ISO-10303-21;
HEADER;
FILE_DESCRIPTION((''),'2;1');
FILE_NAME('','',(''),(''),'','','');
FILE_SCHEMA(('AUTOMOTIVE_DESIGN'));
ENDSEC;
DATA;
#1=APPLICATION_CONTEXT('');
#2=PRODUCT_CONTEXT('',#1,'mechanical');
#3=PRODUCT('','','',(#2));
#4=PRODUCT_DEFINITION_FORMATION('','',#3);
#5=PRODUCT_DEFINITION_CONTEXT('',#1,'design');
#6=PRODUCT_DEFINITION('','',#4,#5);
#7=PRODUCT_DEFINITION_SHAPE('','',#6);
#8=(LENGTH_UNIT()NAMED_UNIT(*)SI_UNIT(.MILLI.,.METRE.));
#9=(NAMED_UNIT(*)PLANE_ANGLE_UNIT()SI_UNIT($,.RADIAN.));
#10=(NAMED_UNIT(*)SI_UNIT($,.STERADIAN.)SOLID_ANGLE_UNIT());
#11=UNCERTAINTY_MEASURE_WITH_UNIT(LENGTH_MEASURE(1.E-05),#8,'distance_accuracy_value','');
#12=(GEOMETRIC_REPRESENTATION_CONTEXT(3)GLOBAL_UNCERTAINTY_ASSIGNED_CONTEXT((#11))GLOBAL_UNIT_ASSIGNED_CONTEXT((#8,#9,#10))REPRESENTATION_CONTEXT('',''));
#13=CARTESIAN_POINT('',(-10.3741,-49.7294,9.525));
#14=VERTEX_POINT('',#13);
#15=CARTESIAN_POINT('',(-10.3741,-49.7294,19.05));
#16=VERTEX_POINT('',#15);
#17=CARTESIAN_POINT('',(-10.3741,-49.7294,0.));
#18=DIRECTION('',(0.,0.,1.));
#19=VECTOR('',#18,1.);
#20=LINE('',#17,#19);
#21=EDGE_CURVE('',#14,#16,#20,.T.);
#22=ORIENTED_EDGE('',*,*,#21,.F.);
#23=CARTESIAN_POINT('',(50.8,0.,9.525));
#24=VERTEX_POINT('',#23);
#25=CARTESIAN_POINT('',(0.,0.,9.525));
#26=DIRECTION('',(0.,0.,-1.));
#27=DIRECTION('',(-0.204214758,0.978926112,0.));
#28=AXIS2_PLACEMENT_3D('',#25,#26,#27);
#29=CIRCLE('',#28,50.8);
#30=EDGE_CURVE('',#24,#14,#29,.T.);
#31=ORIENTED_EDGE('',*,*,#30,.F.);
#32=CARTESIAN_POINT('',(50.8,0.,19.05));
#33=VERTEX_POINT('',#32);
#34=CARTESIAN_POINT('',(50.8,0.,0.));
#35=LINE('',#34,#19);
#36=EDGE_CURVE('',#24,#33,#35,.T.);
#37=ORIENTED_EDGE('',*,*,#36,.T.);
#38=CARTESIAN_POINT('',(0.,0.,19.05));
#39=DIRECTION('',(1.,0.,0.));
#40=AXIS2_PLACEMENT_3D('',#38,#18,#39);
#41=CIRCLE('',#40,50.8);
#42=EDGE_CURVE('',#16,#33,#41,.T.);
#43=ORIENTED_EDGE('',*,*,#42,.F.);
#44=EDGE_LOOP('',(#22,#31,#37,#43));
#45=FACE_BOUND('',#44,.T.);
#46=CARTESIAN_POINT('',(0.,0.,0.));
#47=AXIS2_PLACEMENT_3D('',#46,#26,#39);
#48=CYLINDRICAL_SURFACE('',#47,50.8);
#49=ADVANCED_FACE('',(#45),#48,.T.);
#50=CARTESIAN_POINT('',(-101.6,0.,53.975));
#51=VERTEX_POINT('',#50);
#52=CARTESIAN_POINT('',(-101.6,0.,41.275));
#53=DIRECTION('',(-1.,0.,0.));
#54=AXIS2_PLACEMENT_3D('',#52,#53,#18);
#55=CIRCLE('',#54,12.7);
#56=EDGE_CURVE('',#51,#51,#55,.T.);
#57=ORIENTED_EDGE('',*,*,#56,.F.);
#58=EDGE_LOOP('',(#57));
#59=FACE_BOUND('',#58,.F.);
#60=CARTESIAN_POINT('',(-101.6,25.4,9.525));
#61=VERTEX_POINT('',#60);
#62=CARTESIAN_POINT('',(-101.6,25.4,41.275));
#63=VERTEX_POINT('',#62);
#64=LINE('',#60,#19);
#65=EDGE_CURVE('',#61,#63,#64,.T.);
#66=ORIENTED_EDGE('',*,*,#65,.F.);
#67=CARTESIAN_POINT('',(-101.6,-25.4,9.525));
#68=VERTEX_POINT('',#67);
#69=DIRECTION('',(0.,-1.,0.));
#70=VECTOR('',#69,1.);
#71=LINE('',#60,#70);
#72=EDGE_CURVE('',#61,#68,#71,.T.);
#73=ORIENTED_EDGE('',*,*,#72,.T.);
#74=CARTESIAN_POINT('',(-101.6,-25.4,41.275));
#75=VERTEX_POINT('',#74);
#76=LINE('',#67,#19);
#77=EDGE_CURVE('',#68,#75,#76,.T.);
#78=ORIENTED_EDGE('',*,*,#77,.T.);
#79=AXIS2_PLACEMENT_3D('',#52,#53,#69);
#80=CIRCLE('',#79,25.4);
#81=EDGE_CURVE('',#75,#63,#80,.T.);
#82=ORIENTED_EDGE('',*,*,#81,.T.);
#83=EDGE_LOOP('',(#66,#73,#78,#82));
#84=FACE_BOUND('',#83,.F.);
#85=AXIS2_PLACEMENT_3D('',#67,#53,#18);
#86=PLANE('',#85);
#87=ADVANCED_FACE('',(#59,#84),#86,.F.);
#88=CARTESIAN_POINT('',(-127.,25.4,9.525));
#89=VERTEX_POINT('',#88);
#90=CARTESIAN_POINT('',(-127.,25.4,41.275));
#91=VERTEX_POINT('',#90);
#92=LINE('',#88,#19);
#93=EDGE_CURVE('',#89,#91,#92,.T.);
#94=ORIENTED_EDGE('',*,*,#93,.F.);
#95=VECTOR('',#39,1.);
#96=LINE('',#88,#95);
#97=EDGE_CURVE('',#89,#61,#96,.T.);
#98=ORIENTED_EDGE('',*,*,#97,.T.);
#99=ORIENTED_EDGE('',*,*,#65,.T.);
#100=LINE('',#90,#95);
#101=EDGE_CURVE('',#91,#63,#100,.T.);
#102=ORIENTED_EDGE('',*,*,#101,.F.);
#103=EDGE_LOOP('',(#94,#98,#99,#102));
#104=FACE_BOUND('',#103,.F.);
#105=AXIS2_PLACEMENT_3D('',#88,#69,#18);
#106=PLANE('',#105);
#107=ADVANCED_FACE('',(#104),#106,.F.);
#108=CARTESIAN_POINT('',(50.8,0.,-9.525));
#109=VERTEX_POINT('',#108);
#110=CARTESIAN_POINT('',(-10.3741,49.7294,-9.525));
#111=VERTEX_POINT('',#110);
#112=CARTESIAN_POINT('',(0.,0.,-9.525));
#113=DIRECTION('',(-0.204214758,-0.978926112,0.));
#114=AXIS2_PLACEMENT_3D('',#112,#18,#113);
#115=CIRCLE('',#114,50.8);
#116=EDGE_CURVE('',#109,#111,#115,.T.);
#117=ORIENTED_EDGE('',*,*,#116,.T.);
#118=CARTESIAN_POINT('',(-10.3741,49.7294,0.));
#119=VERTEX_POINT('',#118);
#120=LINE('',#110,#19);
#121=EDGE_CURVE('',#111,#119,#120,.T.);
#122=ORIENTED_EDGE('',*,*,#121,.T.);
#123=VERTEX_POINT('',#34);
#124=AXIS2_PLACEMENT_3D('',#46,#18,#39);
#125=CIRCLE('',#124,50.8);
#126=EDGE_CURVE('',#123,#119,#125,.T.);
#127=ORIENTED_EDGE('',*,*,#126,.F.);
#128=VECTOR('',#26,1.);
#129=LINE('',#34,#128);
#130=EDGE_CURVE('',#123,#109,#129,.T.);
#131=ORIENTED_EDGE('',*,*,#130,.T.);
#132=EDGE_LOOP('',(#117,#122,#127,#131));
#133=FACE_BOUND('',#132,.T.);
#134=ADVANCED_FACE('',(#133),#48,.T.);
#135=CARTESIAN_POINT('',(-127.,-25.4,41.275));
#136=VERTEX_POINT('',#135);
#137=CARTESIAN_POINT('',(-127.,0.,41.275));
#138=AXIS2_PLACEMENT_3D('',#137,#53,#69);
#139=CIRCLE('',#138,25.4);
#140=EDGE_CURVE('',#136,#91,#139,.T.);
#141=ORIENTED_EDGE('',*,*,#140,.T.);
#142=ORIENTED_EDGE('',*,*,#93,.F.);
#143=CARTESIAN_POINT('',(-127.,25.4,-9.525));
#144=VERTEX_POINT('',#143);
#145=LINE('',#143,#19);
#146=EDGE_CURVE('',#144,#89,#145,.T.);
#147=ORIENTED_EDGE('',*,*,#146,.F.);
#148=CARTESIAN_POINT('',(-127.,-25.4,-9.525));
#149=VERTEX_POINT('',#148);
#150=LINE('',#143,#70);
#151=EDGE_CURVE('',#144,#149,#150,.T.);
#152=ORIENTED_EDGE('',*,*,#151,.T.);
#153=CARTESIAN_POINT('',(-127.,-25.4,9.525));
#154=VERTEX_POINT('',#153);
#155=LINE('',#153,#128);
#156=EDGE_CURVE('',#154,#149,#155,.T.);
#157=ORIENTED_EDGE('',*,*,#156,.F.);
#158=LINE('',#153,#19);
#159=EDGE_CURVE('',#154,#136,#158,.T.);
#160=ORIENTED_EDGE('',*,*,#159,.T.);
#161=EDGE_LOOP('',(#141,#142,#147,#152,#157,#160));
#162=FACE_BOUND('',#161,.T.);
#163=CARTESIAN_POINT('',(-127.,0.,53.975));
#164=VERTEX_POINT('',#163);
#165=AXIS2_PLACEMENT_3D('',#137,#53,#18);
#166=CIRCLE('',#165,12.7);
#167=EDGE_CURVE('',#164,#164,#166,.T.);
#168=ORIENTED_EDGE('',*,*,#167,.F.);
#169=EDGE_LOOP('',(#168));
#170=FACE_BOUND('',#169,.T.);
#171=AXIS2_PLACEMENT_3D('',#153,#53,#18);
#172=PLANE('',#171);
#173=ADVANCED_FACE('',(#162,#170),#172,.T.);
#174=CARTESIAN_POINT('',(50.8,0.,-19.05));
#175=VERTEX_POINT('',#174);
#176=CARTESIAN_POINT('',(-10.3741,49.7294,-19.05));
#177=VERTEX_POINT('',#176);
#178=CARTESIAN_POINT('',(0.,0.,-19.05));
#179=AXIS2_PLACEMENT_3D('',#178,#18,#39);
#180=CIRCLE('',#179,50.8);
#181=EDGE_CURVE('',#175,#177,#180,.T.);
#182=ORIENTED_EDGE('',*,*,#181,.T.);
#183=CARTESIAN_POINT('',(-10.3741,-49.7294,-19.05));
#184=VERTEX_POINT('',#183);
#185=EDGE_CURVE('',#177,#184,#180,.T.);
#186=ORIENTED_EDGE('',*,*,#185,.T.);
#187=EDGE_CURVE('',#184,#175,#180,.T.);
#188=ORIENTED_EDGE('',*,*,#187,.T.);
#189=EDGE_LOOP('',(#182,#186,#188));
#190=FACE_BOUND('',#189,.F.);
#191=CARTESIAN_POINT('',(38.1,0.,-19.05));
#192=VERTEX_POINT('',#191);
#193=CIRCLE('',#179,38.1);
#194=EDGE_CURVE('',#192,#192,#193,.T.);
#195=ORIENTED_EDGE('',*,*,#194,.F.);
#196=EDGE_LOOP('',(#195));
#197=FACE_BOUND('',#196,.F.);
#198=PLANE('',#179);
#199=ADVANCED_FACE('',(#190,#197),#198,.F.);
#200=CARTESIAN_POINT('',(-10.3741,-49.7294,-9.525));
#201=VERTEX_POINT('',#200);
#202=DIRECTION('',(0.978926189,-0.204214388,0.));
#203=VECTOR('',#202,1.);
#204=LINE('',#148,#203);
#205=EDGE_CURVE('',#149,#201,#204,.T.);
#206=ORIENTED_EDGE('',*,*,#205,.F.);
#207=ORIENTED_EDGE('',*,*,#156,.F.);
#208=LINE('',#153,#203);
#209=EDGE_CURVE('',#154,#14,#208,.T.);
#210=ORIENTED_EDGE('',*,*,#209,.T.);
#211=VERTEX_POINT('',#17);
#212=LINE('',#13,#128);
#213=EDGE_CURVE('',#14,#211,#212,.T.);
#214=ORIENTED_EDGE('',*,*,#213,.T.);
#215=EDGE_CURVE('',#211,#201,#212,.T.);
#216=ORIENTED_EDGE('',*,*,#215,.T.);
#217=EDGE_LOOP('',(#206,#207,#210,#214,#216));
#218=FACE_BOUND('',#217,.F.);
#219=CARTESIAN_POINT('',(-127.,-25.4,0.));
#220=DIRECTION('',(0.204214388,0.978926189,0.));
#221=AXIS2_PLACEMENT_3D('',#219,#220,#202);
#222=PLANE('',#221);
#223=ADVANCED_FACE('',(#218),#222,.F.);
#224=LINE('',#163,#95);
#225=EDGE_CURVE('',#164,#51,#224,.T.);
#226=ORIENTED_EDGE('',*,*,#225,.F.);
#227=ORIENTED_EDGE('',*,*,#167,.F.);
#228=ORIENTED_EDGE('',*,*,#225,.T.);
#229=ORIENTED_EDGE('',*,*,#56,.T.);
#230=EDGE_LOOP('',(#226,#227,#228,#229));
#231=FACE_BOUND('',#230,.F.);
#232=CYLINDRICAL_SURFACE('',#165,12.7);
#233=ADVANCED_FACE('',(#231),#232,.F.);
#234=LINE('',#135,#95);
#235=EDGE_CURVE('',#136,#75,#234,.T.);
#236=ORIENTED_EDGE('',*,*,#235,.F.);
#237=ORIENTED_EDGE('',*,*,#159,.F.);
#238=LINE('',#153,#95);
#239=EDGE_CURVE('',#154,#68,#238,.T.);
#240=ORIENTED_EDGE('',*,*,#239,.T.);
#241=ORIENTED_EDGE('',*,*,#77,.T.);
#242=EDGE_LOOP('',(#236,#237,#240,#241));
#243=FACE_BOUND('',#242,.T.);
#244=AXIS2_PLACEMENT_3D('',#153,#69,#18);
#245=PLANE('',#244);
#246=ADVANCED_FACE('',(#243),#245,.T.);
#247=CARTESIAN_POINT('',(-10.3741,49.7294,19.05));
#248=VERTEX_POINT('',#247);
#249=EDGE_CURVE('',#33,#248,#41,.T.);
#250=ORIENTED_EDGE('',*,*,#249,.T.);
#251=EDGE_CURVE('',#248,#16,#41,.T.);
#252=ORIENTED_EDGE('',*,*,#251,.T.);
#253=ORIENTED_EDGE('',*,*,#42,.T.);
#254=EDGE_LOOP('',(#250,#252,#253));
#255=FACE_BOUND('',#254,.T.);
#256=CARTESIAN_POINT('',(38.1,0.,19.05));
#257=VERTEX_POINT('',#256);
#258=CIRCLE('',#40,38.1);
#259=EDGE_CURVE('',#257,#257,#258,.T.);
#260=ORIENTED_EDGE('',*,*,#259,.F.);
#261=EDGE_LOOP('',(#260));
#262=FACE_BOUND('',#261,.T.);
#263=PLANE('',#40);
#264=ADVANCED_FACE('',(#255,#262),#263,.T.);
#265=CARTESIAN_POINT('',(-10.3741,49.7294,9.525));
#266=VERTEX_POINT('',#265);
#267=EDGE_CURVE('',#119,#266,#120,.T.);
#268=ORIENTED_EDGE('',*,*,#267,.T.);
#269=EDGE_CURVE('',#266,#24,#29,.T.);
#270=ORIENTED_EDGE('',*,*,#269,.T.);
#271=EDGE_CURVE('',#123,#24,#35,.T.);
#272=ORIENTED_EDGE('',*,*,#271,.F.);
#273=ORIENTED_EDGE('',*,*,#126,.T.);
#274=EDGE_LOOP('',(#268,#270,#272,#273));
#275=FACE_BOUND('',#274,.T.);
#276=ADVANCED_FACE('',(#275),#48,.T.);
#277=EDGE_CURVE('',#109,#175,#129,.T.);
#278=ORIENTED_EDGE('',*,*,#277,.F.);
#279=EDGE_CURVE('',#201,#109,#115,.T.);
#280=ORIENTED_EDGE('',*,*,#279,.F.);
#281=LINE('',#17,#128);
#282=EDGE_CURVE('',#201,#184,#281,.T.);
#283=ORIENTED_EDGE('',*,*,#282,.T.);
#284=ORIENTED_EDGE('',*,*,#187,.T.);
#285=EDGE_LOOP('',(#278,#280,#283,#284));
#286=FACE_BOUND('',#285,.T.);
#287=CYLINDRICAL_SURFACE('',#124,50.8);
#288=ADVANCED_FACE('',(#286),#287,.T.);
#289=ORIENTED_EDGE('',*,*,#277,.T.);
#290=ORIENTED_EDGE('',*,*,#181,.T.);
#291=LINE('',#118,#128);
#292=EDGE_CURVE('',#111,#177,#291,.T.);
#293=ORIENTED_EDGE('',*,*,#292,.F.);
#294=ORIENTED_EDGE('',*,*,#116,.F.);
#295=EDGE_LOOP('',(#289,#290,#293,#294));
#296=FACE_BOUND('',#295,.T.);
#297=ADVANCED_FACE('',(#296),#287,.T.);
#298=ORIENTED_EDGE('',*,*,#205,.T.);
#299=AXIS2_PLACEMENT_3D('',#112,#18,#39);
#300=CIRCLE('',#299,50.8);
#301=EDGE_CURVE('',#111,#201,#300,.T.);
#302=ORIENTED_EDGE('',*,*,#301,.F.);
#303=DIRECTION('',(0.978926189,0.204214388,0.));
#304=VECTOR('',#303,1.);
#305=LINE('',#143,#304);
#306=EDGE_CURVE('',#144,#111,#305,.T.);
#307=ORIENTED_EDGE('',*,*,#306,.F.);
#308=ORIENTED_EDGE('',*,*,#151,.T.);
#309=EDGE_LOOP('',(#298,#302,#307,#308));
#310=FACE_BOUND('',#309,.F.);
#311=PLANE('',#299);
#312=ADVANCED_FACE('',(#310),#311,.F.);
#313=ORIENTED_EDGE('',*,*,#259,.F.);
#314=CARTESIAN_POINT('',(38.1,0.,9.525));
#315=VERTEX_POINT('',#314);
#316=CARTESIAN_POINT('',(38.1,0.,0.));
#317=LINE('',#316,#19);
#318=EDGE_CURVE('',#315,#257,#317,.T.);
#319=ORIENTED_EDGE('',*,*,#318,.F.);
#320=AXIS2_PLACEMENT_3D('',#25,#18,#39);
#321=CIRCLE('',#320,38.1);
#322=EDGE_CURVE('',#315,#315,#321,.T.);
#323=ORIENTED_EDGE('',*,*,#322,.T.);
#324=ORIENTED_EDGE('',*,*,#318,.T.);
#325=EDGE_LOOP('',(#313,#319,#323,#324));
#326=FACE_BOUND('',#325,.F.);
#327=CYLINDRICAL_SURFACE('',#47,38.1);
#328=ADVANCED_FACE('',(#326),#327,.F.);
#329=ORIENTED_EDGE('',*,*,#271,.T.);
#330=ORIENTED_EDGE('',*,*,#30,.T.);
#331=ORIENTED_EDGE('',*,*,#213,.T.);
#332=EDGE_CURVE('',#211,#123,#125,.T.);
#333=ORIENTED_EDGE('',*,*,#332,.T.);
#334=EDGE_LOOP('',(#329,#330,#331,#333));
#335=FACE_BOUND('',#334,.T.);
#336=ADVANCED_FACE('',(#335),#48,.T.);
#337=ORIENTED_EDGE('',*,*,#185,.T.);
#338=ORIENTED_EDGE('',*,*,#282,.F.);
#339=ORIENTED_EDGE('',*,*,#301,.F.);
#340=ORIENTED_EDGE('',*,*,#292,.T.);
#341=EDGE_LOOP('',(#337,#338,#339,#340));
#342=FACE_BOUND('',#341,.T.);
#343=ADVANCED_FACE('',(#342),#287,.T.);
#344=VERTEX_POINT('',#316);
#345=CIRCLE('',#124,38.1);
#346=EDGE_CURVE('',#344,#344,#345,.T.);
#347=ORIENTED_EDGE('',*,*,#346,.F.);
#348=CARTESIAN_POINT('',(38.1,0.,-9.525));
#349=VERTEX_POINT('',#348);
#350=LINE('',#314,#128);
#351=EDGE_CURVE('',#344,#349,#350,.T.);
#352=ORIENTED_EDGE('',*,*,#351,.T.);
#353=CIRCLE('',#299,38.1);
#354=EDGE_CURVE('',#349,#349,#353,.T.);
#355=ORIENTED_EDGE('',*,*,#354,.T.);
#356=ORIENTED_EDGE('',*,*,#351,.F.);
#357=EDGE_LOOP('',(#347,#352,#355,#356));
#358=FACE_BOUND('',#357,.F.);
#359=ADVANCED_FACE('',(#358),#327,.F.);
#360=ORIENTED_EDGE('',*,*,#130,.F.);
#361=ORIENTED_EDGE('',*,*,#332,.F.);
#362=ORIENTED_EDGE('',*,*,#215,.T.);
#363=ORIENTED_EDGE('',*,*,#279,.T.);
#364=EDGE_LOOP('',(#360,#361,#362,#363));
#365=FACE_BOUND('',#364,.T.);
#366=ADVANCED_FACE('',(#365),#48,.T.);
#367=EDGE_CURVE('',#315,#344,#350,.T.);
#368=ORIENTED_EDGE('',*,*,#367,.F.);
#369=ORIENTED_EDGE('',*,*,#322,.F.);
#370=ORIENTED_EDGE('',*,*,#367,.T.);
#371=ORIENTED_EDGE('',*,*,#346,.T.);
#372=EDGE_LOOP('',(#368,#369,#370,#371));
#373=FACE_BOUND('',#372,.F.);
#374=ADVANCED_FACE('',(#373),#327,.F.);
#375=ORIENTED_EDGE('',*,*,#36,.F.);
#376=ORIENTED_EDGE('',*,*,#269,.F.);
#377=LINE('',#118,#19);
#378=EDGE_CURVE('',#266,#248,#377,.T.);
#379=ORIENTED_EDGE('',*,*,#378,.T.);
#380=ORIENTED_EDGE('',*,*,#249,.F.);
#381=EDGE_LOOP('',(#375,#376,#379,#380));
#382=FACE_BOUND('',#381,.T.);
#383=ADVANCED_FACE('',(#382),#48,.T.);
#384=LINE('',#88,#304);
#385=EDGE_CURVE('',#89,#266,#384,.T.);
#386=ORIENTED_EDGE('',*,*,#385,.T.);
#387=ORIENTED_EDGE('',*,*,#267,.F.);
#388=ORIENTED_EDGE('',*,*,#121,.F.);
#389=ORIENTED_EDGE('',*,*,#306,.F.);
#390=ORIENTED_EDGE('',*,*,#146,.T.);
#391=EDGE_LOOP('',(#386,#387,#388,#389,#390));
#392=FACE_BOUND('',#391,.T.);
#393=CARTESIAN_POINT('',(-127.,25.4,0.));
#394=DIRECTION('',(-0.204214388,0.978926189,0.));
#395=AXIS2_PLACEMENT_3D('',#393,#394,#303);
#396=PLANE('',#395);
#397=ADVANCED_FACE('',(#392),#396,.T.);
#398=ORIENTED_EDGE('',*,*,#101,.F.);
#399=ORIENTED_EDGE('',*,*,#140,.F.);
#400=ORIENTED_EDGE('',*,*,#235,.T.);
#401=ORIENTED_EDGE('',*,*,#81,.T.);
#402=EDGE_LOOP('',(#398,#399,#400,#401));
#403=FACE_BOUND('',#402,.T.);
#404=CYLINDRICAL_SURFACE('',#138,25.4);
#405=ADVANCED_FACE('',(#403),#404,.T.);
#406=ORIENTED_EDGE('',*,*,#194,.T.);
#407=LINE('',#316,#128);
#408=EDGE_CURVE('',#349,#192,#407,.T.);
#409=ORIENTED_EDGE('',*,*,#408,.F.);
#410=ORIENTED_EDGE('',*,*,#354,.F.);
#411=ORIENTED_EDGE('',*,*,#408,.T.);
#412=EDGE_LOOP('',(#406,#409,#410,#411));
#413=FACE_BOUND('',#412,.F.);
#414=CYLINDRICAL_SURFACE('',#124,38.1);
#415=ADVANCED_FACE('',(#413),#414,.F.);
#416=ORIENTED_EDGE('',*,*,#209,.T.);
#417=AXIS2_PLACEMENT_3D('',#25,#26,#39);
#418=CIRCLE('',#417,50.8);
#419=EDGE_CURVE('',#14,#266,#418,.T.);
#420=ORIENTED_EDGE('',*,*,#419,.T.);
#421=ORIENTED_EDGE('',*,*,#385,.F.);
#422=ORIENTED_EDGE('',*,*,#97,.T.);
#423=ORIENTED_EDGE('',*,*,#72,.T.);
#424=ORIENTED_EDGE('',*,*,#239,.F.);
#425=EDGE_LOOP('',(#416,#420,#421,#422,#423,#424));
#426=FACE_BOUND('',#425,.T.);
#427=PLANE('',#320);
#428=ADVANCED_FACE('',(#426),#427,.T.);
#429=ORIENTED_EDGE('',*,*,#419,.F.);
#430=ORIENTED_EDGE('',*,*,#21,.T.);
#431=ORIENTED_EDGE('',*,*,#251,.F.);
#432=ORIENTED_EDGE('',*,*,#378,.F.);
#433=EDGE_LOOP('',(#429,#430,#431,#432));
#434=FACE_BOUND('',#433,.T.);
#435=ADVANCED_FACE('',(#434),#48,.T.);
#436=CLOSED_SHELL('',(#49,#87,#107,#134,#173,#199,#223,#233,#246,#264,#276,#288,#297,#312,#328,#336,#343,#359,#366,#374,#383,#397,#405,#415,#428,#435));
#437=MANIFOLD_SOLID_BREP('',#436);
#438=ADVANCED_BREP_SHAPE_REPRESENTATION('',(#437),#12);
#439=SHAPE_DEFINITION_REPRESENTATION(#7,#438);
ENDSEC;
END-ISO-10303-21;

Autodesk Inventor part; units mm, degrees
ref_plane "YZ Plane" through (0, 0, 0) normal (1, 0, 0) x (0, 1, 0)
ref_plane "XZ Plane" through (0, 0, 0) normal (0, 1, 0) x (-1, 0, 0)
ref_plane "XY Plane" through (0, 0, 0) normal (0, 0, 1) x (1, 0, 0)
sketch "Sketch1" plane through (0, 0, 0) normal (0, 0, 1) x (1, 0, 0)
  circle A0 centre (0, 0) radius 38.1
  circle A1 centre (0, 0) radius 50.8
  line L0 (-127, 25.4) -> (-127, -25.4)
  line L1 (-127, 25.4) -> (-10.3741, 49.7294)
  line L2 (-127, -25.4) -> (-10.3741, -49.7294)
  dimension "d5" = 76.2
  dimension "d6" = 101.6
  dimension "d7" = 50.8
  dimension "d8" = 127
  dimension "d9" = 25.4
extrude "Extrusion1" add sketch "Sketch1" along normal mid plane 19.05
extrude "Extrusion2" add sketch "Sketch1" along normal mid plane 38.1 contours A1
sketch "Sketch3" plane through (-127, -25.4, 9.525) normal (-1, 0, 0) x (0, 0, 1)
  line L0 (0, 50.8) -> (31.75, 50.8)
  line L1 (0, 0) -> (31.75, 0)
  arc A0 (31.75, 0) -> (31.75, 50.8) centre (31.75, 25.4) ccw
  line L2 (-19.05, 0) -> (-19.05, 50.8) projected
  circle A1 centre (31.75, 25.4) radius 12.7
  line L3 (0, 50.8) -> (0, 0)
  line L4 (0, 50.8) -> (-19.05, 50.8) projected
  point P0 (-9.525, 25.4)
  dimension "d14" = 25.4
  dimension "d15" = 50.8
  dimension "d16" = 25.4
extrude "Extrusion3" add sketch "Sketch3" against normal blind 25.4
properties part number "HW 7 Part 4" material "Aluminum 6061"
